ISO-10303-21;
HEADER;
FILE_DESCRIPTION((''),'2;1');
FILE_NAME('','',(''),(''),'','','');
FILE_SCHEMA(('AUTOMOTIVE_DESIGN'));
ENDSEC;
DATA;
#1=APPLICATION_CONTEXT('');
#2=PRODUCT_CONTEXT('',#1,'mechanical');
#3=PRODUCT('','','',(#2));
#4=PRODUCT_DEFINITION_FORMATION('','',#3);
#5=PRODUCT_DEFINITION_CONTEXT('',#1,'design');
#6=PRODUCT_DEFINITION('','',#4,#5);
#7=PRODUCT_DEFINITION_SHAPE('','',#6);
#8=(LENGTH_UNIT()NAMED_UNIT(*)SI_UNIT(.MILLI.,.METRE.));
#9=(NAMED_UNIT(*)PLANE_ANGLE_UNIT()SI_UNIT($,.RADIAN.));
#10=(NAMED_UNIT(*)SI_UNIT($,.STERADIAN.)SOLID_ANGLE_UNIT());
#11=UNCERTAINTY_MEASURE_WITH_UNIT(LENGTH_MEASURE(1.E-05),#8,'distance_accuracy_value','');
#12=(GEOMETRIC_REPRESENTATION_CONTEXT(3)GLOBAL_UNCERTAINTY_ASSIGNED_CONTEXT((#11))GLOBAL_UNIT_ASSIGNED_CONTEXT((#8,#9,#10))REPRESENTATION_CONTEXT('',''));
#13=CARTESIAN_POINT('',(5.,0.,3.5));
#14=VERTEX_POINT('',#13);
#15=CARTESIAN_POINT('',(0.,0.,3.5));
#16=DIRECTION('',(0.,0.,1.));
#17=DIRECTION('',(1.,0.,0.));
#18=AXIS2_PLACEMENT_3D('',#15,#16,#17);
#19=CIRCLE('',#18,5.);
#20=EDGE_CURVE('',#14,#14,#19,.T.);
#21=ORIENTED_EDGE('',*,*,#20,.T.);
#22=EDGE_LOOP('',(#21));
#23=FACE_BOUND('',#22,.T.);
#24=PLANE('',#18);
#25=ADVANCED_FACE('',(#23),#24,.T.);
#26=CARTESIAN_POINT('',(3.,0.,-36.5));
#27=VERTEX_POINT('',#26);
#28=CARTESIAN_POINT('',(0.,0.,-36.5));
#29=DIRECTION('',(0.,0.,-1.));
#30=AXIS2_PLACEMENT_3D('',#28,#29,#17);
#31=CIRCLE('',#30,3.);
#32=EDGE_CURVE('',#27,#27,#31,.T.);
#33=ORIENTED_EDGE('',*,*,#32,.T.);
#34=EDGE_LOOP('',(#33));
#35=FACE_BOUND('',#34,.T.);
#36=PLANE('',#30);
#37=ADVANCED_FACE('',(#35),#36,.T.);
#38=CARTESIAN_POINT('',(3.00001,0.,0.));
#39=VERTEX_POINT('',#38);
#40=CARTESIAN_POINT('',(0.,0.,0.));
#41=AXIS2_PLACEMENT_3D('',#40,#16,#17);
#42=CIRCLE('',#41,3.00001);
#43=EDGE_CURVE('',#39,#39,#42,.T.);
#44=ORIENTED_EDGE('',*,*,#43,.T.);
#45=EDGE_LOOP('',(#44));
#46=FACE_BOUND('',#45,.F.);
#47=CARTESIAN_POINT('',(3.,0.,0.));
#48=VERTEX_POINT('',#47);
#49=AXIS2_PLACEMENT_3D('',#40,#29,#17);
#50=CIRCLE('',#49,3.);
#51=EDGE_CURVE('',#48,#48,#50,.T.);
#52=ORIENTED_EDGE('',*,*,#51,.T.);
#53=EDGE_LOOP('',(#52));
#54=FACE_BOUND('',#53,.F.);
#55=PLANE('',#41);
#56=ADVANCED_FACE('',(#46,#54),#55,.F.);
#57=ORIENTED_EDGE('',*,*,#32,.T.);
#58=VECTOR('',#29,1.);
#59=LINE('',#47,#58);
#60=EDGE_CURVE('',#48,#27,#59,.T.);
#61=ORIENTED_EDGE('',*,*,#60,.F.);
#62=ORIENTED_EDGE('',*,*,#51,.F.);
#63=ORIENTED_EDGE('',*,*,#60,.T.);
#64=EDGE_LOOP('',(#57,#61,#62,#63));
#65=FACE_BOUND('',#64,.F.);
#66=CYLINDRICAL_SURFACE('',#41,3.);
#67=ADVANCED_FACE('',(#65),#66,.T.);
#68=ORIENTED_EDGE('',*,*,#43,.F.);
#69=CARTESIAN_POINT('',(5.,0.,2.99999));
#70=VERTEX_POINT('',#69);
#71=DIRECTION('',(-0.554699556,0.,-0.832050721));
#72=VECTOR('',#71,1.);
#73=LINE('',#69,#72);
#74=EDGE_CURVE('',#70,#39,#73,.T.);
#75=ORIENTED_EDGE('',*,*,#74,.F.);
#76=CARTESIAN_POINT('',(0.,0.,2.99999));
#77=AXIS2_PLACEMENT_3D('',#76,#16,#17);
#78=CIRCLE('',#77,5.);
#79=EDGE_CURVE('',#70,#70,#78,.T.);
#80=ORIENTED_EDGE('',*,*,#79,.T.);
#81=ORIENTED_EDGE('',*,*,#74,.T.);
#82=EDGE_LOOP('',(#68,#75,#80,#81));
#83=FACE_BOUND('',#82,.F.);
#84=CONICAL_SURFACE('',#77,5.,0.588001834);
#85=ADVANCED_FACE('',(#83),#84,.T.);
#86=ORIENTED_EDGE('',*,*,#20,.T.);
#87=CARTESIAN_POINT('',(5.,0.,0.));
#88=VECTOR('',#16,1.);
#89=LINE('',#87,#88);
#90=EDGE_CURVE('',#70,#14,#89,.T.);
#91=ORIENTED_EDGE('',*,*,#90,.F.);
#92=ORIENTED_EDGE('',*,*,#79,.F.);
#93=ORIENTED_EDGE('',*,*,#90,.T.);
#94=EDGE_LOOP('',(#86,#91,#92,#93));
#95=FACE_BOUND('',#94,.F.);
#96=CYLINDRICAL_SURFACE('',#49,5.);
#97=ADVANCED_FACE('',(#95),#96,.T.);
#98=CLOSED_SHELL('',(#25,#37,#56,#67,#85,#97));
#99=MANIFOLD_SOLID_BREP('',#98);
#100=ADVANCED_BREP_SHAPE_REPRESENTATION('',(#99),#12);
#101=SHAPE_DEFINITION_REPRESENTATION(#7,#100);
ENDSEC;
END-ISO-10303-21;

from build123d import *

# Parameters (mm, degrees)
F0_R     = 5
F1_DEPTH = 3.5
F2_R     = 3
F3_DEPTH = 36.5
F4_SIZE2 = 1.99999
F4_SIZE  = 2.99999


# Not quite as in the source:
# - a fillet or chamfer is up to 0.001 mm smaller than in the source, because OpenCascade refuses the exact size


with BuildPart() as f1:
    # F0 (on Top) → F1 (new body)
    with BuildSketch(Plane.XY):
        Circle(F0_R)
    extrude(amount=F1_DEPTH)

    # F2 (on face) → F3 (join)
    with BuildSketch(Plane(origin=(0, 0, 0), x_dir=(1, 0, 0), z_dir=(0, 0, -1))):
        Circle(F2_R)
    extrude(amount=F3_DEPTH)

    # F4 (size 3 and 2 in the source; OpenCascade refuses exactly that, so slightly less here)
    f4_edges = [f1.edges().sort_by_distance(p)[0] for p in [
        (-5, 0, 0),
    ]]
    f4_side = f1.faces().sort_by_distance((-5, 0, 1.75))[0]
    chamfer(f4_edges, length=F4_SIZE, length2=F4_SIZE2, reference=f4_side)


solid = f1.part
